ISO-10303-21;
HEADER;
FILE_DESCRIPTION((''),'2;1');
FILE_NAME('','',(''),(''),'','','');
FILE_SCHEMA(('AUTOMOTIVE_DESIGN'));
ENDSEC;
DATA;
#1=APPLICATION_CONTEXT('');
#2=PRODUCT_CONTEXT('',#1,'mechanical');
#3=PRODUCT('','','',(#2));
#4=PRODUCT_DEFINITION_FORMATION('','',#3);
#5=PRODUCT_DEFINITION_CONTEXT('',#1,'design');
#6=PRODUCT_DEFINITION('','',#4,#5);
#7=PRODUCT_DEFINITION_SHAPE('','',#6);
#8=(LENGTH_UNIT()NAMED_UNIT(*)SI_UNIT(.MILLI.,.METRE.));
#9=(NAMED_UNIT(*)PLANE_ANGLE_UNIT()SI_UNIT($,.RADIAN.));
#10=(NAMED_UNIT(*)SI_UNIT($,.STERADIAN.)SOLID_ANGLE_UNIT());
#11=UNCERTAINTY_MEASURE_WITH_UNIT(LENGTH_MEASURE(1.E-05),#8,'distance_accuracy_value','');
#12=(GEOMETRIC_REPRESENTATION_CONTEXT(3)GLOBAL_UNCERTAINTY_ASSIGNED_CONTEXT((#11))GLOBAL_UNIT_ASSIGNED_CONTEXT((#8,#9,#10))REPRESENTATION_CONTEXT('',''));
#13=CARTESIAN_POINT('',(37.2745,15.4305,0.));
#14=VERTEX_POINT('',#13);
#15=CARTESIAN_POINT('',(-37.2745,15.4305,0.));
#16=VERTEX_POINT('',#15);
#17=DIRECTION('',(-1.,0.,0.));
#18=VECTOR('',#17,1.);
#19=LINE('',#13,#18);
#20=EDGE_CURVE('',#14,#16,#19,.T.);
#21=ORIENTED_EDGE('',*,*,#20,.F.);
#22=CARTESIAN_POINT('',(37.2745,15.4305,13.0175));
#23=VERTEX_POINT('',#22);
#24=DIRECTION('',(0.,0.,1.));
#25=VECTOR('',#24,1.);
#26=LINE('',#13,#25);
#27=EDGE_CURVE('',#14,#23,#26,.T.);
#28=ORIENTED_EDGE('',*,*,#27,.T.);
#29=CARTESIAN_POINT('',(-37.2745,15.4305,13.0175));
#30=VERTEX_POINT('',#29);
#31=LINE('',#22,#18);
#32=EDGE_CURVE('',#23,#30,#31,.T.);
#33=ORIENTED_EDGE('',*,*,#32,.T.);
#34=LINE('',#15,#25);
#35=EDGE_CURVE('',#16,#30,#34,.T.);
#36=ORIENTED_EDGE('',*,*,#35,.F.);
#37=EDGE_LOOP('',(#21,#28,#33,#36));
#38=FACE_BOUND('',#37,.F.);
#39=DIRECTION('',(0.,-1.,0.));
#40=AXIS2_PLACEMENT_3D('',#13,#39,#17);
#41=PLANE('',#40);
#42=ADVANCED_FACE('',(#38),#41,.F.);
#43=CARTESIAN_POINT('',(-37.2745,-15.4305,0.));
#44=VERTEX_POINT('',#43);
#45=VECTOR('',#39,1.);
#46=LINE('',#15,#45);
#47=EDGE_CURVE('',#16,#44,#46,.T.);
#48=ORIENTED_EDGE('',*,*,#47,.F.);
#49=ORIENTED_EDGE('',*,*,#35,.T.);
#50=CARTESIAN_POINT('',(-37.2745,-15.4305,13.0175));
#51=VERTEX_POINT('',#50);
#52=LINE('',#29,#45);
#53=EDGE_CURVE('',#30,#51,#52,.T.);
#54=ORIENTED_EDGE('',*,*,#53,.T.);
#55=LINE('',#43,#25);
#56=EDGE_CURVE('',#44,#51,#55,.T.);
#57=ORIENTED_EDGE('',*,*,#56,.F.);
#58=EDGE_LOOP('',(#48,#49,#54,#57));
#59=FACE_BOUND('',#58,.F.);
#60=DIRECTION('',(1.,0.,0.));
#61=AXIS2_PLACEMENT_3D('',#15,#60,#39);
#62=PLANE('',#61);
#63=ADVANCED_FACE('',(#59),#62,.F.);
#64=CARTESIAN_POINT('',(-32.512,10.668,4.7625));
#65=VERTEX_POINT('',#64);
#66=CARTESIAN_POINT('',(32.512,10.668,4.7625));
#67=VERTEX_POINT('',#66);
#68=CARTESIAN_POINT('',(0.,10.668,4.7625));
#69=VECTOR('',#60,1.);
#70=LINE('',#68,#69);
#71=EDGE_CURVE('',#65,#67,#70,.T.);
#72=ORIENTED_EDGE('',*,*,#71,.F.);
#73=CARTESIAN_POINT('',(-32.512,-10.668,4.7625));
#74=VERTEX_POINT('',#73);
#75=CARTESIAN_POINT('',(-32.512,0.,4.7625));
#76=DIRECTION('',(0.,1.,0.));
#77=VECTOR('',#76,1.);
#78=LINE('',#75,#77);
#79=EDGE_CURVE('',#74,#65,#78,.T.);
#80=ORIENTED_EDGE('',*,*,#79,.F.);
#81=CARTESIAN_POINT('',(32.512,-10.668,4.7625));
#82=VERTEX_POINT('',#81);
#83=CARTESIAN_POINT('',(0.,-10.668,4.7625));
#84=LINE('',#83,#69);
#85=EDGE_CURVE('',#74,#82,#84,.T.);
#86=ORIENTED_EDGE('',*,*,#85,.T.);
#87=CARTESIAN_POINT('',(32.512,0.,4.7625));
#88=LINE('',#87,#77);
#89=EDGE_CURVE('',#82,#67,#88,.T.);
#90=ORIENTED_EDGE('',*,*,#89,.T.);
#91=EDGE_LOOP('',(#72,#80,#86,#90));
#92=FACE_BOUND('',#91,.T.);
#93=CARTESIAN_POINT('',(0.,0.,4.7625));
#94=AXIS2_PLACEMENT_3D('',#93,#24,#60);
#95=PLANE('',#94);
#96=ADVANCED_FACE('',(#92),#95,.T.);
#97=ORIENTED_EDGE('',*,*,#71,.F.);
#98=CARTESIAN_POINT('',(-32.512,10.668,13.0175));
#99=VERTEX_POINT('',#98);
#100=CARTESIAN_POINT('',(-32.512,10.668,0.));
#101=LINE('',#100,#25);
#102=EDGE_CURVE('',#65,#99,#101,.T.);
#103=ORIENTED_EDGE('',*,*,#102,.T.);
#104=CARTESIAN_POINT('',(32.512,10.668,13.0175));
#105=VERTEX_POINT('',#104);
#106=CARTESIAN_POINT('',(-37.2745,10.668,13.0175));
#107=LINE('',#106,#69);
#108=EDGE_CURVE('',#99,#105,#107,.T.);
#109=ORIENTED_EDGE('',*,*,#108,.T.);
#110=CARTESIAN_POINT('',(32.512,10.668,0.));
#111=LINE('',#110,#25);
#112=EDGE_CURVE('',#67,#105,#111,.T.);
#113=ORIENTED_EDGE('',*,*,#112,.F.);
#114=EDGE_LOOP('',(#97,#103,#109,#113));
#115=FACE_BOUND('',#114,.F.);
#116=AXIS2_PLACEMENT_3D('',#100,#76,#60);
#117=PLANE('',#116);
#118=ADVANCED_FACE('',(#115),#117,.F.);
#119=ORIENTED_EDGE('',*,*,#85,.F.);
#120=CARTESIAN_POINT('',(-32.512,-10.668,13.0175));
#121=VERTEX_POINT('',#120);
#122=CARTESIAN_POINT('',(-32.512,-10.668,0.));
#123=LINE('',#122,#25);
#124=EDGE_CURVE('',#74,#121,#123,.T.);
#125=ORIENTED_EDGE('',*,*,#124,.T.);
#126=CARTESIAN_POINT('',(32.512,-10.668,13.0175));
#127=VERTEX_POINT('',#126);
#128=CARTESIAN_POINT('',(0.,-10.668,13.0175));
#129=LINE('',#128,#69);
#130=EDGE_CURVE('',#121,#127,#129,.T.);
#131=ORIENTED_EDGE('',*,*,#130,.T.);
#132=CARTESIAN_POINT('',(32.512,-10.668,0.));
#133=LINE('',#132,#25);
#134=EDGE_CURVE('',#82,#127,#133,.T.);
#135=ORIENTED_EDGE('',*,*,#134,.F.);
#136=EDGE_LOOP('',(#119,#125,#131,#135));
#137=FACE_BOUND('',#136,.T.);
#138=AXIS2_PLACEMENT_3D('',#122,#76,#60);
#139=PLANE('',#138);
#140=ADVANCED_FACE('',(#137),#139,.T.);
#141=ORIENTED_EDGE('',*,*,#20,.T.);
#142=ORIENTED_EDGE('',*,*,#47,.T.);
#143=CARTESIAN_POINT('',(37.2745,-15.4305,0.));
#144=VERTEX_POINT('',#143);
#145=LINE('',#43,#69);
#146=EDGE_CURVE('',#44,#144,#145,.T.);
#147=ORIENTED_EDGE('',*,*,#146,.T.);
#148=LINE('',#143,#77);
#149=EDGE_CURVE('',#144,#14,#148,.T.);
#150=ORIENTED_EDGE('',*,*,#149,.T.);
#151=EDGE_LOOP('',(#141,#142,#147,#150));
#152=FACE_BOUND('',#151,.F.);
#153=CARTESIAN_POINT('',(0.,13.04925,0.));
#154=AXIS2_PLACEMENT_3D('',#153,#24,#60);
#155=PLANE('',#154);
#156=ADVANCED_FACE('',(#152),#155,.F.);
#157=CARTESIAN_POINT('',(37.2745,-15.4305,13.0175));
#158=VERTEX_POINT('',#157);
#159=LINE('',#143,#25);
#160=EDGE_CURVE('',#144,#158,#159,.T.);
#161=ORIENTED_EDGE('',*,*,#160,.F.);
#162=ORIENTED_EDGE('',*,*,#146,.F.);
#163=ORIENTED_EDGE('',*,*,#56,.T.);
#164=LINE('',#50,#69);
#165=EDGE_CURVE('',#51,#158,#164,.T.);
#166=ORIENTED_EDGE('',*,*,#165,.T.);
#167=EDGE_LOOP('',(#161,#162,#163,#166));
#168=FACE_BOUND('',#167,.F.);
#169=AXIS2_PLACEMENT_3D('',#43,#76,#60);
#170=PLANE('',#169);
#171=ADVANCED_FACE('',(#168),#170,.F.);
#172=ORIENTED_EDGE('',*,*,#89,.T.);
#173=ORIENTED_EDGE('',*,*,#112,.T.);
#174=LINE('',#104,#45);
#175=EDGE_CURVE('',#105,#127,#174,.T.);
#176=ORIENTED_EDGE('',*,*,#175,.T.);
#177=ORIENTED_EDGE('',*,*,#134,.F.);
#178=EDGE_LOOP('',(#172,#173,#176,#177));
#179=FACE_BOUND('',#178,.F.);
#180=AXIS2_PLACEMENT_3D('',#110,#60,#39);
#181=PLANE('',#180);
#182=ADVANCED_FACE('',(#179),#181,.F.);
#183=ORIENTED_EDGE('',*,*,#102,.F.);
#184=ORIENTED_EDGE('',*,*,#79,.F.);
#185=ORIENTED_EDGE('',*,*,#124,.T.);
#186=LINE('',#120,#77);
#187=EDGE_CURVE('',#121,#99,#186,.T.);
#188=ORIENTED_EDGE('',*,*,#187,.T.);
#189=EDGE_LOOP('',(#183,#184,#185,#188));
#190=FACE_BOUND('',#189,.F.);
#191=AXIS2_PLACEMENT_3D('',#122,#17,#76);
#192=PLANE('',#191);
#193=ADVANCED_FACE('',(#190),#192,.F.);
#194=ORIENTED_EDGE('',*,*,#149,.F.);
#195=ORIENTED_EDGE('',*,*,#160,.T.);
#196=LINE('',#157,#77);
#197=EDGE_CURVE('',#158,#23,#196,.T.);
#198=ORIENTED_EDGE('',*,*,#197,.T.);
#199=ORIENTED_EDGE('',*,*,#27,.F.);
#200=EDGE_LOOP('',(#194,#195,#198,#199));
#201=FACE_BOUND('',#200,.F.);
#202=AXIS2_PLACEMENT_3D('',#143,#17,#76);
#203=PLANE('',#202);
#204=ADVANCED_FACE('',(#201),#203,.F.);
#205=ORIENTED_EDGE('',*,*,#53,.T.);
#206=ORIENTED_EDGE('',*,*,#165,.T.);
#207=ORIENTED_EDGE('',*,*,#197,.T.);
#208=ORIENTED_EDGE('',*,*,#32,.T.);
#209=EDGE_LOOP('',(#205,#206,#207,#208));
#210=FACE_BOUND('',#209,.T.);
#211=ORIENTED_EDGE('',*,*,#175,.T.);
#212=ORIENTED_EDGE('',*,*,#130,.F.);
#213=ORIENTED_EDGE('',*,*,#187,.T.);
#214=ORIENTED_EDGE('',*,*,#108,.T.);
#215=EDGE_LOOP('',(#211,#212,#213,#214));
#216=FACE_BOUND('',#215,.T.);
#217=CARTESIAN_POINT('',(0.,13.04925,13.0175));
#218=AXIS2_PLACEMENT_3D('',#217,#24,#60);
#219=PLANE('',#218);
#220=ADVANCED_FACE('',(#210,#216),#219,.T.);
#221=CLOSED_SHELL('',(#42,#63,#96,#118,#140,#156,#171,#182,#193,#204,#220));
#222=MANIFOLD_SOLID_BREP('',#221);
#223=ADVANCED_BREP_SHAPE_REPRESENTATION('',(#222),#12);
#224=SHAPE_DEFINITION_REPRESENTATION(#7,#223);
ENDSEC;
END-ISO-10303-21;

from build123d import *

# Parameters (mm, degrees)
F1_W     = 65.024
F1_H     = 21.336
F2_DEPTH = 4.7625
F1_H_2   = 4.7625
F3_DEPTH = 13.0175


# Not quite as in the source:
# - a variable given as a bare number and used for a length is read in inches; the dataset says mm whatever the document's units were


with BuildPart() as f2:
    # F1 (on Top) → F2 (new body)
    with BuildSketch(Plane.XY):
        Rectangle(F1_W, F1_H)
    extrude(amount=F2_DEPTH)

    # F1 (on Top) → F3 (join)
    with BuildSketch(Plane.XY):
        Polygon((37.2745, 15.4305), (-37.2745, 15.4305), (-37.2745, 10.668), (-32.512, 10.668), (32.512, 10.668), (37.2745, 10.668), align=None)
        Polygon((37.2745, -15.4305), (37.2745, 10.668), (32.512, 10.668), (32.512, -10.668), (32.512, -15.4305), align=None)
        with Locations((0, -13.04925)):
            Rectangle(F1_W, F1_H_2)
        Polygon((-32.512, 10.668), (-37.2745, 10.668), (-37.2745, -15.4305), (-32.512, -15.4305), (-32.512, -10.668), align=None)
    extrude(amount=F3_DEPTH)


solid = f2.part
